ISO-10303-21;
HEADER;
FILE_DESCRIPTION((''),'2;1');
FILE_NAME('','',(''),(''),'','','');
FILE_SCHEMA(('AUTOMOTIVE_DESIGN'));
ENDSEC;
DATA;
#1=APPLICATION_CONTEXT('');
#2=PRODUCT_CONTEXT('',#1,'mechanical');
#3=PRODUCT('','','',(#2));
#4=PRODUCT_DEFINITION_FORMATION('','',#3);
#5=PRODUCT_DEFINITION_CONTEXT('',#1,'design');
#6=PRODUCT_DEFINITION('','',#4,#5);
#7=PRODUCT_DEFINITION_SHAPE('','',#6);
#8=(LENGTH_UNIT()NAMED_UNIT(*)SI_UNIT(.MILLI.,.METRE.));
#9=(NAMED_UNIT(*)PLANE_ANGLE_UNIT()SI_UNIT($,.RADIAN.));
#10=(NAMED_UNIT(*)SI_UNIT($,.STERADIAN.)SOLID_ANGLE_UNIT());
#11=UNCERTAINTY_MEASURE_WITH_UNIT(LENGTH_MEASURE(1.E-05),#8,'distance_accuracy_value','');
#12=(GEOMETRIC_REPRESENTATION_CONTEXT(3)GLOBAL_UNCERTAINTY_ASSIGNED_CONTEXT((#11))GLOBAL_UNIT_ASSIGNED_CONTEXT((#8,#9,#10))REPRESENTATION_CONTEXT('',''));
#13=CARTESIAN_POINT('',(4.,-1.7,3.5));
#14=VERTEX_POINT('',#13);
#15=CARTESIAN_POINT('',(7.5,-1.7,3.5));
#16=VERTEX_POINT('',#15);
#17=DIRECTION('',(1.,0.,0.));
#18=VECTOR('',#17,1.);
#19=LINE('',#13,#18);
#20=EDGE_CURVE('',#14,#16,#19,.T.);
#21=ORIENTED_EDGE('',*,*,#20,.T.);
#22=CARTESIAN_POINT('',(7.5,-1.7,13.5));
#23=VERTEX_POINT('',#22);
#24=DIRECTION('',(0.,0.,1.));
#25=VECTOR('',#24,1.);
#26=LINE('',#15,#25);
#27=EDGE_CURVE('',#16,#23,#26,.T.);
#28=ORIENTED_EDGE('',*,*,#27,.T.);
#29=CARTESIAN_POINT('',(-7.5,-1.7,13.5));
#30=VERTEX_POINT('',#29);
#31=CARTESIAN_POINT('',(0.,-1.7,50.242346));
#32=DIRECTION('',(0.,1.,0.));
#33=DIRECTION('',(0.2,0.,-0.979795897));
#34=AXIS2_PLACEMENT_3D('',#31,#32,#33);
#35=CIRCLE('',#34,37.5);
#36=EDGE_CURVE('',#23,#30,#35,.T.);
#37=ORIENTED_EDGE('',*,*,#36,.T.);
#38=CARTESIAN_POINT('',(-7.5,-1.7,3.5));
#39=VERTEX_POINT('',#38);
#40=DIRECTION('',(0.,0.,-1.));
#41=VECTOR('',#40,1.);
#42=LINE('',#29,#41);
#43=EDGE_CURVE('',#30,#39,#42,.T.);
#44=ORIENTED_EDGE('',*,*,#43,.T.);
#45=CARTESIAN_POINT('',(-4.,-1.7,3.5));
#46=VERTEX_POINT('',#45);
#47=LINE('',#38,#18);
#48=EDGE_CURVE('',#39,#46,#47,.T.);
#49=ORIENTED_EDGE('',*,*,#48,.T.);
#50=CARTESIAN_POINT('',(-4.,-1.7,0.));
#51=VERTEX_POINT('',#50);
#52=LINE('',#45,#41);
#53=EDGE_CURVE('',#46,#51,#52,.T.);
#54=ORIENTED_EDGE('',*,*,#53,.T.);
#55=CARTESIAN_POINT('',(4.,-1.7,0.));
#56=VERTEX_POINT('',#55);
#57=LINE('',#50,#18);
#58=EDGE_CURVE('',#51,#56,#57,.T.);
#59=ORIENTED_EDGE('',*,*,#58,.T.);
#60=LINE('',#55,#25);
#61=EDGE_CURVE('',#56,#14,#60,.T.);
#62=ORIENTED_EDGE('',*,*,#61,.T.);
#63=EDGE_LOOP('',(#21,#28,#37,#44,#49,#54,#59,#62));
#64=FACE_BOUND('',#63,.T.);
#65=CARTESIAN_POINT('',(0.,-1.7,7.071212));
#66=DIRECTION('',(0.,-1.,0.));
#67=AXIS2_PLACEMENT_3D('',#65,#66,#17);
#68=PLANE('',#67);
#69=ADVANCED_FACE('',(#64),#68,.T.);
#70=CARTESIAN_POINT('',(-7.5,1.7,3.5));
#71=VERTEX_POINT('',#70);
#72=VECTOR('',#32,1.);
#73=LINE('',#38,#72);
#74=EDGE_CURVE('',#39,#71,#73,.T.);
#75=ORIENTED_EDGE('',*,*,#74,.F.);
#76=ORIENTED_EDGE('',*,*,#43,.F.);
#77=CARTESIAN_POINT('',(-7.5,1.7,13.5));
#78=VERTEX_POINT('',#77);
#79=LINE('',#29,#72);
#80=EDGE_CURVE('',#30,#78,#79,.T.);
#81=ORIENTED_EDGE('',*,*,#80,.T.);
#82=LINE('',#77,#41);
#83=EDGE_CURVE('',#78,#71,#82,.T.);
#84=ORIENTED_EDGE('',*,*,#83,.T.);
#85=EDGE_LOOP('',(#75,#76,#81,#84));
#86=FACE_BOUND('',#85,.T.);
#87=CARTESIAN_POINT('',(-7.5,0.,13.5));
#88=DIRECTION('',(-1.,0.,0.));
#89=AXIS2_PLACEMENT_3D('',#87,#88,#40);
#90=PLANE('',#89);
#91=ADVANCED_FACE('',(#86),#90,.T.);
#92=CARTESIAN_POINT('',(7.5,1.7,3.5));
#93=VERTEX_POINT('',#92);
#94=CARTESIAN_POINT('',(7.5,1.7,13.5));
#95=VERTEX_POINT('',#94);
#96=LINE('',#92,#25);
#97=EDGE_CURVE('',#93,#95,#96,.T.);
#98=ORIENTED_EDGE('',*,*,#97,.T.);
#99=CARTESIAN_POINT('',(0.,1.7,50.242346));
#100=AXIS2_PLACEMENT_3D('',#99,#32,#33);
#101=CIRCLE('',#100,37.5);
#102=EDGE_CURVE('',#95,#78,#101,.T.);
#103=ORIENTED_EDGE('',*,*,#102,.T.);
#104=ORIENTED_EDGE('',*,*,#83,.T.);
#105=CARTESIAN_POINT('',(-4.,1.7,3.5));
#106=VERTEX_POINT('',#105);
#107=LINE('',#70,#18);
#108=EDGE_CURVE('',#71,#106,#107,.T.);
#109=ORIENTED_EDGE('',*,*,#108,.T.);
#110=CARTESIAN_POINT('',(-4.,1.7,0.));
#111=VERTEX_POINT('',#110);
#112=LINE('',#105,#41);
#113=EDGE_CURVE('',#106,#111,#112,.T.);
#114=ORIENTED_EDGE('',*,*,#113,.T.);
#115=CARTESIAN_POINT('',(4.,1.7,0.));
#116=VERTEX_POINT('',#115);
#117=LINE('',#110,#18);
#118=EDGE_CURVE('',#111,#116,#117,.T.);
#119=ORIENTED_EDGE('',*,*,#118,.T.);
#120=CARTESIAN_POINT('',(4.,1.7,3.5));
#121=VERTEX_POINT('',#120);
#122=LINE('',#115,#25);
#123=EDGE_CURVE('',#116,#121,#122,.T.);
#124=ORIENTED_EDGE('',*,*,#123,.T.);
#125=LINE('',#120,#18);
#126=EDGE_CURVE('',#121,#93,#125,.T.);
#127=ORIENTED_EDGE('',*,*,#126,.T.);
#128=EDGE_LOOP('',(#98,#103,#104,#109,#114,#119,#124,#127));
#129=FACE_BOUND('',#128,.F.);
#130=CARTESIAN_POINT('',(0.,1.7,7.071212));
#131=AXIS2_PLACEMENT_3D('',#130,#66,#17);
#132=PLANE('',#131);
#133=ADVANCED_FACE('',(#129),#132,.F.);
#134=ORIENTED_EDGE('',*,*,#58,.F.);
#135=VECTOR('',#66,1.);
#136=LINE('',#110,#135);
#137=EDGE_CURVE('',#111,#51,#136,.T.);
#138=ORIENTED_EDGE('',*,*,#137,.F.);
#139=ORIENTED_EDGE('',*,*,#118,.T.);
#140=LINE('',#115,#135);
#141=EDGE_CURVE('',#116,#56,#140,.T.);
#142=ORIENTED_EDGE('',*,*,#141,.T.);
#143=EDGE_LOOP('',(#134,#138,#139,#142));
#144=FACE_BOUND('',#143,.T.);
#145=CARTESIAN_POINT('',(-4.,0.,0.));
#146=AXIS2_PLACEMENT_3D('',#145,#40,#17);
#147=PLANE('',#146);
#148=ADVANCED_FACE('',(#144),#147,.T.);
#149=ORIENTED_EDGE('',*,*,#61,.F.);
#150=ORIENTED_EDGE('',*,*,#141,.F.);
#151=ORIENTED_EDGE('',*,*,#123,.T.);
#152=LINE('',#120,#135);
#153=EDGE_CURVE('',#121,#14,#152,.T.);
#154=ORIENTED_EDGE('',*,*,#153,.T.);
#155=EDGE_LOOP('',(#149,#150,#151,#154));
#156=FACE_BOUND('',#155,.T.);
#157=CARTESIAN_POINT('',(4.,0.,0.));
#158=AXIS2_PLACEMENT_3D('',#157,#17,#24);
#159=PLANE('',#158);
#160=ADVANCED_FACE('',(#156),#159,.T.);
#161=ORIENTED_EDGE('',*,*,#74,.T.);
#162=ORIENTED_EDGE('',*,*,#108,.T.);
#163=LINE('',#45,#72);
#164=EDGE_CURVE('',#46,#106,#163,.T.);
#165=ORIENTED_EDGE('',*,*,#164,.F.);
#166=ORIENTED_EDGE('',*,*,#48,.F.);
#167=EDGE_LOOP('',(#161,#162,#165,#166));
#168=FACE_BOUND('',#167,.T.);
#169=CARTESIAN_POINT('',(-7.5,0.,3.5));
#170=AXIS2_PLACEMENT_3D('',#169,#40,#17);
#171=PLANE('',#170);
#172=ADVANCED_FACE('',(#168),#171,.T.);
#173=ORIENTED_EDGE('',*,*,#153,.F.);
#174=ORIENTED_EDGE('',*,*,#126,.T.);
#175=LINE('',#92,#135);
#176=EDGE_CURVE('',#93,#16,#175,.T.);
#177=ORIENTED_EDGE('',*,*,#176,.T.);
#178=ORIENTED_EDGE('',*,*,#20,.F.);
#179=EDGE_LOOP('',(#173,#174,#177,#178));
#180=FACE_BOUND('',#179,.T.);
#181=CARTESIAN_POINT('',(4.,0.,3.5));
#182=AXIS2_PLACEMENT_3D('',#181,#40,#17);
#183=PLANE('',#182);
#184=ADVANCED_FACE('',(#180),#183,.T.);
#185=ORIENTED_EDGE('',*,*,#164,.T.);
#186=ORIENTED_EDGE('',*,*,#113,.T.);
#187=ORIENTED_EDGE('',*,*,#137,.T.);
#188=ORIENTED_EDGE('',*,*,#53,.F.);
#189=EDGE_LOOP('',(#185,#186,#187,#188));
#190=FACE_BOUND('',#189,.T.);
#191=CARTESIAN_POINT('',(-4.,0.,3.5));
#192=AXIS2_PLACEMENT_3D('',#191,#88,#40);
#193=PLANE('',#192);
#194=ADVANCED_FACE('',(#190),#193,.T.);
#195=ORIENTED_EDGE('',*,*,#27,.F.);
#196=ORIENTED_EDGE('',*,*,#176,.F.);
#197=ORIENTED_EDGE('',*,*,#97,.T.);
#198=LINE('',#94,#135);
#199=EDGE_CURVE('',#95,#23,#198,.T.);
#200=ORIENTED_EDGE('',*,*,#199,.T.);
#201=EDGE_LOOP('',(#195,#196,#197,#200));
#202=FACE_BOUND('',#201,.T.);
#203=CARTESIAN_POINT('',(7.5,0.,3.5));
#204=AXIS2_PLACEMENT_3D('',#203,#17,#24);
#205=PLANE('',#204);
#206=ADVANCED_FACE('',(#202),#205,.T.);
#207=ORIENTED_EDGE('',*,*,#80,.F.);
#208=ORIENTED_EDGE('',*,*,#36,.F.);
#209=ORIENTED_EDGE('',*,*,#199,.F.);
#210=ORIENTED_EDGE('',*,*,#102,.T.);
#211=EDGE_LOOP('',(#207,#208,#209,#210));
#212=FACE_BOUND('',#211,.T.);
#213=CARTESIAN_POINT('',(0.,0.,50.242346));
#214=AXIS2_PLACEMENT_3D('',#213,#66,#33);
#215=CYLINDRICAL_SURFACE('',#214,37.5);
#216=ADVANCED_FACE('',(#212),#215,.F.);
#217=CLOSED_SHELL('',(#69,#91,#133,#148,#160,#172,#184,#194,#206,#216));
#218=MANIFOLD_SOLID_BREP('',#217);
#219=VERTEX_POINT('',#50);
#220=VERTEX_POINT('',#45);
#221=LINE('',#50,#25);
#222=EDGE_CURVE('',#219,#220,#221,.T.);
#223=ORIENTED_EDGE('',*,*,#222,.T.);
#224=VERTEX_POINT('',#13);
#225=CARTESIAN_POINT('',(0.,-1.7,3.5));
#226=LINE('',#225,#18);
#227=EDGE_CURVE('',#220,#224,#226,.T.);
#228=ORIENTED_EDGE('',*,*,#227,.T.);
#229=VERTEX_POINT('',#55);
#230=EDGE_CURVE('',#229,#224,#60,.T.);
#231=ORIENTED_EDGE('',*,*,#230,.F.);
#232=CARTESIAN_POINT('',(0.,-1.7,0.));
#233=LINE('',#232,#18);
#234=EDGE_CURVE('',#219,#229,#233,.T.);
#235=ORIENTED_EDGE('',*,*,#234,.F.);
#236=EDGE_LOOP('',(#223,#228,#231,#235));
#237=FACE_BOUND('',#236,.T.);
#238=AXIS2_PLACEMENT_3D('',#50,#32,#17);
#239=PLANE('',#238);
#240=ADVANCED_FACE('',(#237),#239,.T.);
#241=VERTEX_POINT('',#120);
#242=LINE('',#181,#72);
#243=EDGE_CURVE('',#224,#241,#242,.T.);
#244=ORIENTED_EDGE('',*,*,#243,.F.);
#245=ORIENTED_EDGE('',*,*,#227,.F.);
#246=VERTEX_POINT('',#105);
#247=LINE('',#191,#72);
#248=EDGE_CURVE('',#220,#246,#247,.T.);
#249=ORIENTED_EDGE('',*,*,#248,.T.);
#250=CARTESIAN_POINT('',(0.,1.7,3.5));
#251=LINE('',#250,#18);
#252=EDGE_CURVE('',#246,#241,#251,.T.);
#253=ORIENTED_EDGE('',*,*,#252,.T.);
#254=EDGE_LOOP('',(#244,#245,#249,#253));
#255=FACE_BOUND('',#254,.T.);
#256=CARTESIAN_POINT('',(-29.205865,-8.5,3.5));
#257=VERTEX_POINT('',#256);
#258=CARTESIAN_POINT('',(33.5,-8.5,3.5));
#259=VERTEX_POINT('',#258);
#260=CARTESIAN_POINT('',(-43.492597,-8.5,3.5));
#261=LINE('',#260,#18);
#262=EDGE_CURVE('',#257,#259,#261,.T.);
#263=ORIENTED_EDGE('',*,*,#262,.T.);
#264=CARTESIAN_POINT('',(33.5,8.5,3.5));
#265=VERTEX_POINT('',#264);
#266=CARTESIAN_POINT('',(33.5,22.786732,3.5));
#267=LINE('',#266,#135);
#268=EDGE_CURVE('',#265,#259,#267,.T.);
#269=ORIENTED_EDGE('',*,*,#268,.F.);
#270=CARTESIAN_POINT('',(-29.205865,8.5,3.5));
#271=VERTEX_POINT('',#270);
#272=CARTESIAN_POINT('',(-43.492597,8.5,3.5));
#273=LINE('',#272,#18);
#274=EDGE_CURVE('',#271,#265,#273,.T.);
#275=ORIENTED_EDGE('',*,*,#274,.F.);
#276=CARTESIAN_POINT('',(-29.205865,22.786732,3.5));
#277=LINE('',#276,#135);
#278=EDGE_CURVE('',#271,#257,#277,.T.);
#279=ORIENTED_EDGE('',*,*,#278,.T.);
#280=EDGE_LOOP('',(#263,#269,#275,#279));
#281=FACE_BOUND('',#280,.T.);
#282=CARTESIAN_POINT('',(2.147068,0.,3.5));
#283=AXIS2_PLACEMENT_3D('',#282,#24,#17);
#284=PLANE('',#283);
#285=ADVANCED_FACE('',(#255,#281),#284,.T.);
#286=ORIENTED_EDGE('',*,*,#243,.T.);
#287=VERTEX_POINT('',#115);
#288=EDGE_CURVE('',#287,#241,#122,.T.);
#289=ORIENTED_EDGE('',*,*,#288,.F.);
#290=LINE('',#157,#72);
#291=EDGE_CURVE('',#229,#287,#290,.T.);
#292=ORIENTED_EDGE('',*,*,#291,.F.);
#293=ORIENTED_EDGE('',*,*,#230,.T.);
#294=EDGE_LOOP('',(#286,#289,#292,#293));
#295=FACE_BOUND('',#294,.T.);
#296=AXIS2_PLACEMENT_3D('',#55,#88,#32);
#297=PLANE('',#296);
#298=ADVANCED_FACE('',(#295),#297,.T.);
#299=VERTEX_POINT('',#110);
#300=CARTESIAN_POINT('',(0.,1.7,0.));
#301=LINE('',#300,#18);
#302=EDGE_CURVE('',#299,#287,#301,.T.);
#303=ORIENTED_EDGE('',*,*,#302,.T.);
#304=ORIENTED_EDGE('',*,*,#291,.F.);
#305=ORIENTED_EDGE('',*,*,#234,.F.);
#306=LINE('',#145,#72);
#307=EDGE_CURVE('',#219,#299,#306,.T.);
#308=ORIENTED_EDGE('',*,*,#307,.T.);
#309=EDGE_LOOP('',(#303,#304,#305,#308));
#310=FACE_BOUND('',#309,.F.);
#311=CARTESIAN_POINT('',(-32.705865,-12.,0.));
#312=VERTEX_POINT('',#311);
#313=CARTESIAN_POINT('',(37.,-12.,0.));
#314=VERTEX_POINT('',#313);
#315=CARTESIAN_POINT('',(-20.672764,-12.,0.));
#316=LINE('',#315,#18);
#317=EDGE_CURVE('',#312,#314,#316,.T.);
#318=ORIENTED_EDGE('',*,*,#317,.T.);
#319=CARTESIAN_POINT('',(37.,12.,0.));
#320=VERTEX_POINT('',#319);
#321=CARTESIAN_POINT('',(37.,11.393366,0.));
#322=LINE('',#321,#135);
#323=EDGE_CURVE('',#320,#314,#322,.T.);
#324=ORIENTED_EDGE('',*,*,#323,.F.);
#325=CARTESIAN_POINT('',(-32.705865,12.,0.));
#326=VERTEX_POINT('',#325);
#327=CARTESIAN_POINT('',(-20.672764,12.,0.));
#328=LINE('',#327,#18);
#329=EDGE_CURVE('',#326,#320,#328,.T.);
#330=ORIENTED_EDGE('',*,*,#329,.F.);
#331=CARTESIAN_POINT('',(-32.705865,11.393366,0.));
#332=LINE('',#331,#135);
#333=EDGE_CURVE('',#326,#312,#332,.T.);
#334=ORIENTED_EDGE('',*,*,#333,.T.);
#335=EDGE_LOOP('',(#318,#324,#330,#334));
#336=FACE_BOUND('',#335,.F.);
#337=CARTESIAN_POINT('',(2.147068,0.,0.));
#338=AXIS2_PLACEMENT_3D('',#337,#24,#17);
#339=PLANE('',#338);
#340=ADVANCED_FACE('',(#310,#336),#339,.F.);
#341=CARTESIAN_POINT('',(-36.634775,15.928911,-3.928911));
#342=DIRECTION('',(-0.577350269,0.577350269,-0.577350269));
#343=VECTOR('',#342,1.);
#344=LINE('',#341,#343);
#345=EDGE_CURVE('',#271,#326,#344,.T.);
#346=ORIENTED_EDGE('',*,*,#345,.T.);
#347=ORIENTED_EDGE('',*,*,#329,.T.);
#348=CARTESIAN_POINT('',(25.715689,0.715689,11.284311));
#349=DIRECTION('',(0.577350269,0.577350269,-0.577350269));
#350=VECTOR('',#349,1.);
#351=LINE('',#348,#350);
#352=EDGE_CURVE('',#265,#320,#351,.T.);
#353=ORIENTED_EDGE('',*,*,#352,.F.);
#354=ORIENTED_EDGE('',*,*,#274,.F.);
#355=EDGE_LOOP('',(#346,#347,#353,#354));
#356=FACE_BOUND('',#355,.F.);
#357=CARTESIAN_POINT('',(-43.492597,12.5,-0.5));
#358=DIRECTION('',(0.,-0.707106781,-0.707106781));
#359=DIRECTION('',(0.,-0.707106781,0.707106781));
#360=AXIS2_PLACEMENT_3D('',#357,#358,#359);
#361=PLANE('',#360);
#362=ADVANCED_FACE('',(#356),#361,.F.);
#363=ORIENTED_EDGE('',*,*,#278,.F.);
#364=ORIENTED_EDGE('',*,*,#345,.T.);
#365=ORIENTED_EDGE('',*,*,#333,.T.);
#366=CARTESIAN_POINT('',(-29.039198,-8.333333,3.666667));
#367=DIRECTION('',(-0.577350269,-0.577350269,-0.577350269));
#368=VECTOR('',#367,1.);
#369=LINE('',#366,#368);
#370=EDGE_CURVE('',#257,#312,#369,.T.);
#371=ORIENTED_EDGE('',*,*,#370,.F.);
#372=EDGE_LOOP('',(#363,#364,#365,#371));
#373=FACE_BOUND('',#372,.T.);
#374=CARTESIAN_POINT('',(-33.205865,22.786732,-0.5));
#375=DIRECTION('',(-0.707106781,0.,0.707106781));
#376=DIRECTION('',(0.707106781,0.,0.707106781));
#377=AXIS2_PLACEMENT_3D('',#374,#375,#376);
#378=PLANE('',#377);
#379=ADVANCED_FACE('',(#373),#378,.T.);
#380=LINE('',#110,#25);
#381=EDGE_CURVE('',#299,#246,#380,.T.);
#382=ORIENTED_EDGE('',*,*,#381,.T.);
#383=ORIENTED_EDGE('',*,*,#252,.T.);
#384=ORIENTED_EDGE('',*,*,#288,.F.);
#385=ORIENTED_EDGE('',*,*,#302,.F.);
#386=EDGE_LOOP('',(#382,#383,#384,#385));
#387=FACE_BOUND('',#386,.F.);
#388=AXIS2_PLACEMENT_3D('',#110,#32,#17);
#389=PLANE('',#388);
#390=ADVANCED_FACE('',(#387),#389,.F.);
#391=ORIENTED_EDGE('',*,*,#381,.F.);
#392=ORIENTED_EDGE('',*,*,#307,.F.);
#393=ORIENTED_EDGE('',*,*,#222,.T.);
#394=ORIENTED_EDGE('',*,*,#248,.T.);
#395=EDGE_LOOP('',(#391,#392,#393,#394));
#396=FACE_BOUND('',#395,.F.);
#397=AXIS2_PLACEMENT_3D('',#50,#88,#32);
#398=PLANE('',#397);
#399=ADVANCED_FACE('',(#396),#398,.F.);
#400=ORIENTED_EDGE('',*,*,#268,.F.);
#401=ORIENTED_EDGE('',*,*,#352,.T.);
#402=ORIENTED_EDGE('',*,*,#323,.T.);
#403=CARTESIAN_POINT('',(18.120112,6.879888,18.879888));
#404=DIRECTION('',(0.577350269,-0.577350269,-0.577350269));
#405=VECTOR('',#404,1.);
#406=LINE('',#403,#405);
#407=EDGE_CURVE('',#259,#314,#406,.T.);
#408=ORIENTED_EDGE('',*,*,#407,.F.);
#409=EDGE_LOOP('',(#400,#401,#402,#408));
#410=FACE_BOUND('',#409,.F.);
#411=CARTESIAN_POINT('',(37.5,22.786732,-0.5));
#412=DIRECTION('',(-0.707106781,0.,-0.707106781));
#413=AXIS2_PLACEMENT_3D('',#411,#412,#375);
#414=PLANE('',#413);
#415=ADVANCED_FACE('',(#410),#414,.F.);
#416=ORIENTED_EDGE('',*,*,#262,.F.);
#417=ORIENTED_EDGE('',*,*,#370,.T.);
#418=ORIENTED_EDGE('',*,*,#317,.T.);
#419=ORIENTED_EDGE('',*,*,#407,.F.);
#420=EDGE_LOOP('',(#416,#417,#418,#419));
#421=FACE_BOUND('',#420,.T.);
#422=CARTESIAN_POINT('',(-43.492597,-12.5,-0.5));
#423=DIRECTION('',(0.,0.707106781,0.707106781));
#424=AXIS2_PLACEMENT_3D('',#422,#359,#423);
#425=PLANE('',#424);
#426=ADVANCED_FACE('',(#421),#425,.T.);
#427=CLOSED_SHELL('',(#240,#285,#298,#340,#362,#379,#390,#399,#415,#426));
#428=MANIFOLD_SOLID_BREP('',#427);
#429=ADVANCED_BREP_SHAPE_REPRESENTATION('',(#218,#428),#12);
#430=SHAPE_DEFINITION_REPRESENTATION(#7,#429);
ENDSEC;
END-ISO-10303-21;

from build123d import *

# Parameters (mm, degrees)
F0_W        = 70.7058645785
F0_H        = 25
F1_DEPTH    = 3.5
F2_T1_DEPTH = 91.2793284822
F2_T3_DEPTH = 45.5734639037
F3_W        = 8
F3_H        = 3.4
F4_DEPTH    = 3.5
F6_DEPTH    = 1.7


# Not quite as in the source:
# - a fillet or chamfer that OpenCascade refuses, or shapes differently, is made with other operations: its cross-section is extruded or revolved along the edge and cut away or added


with BuildPart() as f1:
    # F0 (on Top) → F1 (new body)
    with BuildSketch(Plane.XY):
        with Locations((2.1470677108, 0)):
            Rectangle(F0_W, F0_H)
    extrude(amount=F1_DEPTH)

    # F2: chamfer of 4 on 4 edges, made by hand

    # F2_s2 → F2_t1 (cut)
    with BuildSketch(Plane.YZ.offset(-43.4925965303)):
        Polygon((-12.5, -0.5), (-8.5, 3.5), (-12.5, 3.5), align=None)
        Polygon((12.5, -0.5), (8.5, 3.5), (12.5, 3.5), align=None)
    extrude(amount=F2_T1_DEPTH, mode=Mode.SUBTRACT)

    # F2_s4 → F2_t3 (cut)
    with BuildSketch(Plane.XZ.offset(-22.7867319519)):
        Polygon((-33.2058645785, -0.5), (-29.2058645785, 3.5), (-33.2058645785, 3.5), align=None)
        Polygon((37.5, -0.5), (33.5, 3.5), (37.5, 3.5), align=None)
    extrude(amount=F2_T3_DEPTH, mode=Mode.SUBTRACT)

    # F3 (on Top) → F4 (cut)
    with BuildSketch(Plane.XY):
        Rectangle(F3_W, F3_H)
    extrude(amount=F4_DEPTH, mode=Mode.SUBTRACT)


with BuildPart() as f6:
    # F5 (on Front) → F6 (new body, symmetric)
    with BuildSketch(Plane.XZ):
        with BuildLine():
            Line((-4, 3.5), (-4, 0))
            Line((-4, 0), (4, 0))
            Line((4, 0), (4, 3.5))
            Line((4, 3.5), (7.5, 3.5))
            Line((7.5, 3.5), (7.5, 13.5))
            ThreePointArc((7.5, 13.5), (0, 12.7423461417), (-7.5, 13.5))
            Line((-7.5, 13.5), (-7.5, 3.5))
            Line((-7.5, 3.5), (-4, 3.5))
        make_face()
    extrude(amount=F6_DEPTH, both=True)


solid = Compound([f1.part, f6.part])
